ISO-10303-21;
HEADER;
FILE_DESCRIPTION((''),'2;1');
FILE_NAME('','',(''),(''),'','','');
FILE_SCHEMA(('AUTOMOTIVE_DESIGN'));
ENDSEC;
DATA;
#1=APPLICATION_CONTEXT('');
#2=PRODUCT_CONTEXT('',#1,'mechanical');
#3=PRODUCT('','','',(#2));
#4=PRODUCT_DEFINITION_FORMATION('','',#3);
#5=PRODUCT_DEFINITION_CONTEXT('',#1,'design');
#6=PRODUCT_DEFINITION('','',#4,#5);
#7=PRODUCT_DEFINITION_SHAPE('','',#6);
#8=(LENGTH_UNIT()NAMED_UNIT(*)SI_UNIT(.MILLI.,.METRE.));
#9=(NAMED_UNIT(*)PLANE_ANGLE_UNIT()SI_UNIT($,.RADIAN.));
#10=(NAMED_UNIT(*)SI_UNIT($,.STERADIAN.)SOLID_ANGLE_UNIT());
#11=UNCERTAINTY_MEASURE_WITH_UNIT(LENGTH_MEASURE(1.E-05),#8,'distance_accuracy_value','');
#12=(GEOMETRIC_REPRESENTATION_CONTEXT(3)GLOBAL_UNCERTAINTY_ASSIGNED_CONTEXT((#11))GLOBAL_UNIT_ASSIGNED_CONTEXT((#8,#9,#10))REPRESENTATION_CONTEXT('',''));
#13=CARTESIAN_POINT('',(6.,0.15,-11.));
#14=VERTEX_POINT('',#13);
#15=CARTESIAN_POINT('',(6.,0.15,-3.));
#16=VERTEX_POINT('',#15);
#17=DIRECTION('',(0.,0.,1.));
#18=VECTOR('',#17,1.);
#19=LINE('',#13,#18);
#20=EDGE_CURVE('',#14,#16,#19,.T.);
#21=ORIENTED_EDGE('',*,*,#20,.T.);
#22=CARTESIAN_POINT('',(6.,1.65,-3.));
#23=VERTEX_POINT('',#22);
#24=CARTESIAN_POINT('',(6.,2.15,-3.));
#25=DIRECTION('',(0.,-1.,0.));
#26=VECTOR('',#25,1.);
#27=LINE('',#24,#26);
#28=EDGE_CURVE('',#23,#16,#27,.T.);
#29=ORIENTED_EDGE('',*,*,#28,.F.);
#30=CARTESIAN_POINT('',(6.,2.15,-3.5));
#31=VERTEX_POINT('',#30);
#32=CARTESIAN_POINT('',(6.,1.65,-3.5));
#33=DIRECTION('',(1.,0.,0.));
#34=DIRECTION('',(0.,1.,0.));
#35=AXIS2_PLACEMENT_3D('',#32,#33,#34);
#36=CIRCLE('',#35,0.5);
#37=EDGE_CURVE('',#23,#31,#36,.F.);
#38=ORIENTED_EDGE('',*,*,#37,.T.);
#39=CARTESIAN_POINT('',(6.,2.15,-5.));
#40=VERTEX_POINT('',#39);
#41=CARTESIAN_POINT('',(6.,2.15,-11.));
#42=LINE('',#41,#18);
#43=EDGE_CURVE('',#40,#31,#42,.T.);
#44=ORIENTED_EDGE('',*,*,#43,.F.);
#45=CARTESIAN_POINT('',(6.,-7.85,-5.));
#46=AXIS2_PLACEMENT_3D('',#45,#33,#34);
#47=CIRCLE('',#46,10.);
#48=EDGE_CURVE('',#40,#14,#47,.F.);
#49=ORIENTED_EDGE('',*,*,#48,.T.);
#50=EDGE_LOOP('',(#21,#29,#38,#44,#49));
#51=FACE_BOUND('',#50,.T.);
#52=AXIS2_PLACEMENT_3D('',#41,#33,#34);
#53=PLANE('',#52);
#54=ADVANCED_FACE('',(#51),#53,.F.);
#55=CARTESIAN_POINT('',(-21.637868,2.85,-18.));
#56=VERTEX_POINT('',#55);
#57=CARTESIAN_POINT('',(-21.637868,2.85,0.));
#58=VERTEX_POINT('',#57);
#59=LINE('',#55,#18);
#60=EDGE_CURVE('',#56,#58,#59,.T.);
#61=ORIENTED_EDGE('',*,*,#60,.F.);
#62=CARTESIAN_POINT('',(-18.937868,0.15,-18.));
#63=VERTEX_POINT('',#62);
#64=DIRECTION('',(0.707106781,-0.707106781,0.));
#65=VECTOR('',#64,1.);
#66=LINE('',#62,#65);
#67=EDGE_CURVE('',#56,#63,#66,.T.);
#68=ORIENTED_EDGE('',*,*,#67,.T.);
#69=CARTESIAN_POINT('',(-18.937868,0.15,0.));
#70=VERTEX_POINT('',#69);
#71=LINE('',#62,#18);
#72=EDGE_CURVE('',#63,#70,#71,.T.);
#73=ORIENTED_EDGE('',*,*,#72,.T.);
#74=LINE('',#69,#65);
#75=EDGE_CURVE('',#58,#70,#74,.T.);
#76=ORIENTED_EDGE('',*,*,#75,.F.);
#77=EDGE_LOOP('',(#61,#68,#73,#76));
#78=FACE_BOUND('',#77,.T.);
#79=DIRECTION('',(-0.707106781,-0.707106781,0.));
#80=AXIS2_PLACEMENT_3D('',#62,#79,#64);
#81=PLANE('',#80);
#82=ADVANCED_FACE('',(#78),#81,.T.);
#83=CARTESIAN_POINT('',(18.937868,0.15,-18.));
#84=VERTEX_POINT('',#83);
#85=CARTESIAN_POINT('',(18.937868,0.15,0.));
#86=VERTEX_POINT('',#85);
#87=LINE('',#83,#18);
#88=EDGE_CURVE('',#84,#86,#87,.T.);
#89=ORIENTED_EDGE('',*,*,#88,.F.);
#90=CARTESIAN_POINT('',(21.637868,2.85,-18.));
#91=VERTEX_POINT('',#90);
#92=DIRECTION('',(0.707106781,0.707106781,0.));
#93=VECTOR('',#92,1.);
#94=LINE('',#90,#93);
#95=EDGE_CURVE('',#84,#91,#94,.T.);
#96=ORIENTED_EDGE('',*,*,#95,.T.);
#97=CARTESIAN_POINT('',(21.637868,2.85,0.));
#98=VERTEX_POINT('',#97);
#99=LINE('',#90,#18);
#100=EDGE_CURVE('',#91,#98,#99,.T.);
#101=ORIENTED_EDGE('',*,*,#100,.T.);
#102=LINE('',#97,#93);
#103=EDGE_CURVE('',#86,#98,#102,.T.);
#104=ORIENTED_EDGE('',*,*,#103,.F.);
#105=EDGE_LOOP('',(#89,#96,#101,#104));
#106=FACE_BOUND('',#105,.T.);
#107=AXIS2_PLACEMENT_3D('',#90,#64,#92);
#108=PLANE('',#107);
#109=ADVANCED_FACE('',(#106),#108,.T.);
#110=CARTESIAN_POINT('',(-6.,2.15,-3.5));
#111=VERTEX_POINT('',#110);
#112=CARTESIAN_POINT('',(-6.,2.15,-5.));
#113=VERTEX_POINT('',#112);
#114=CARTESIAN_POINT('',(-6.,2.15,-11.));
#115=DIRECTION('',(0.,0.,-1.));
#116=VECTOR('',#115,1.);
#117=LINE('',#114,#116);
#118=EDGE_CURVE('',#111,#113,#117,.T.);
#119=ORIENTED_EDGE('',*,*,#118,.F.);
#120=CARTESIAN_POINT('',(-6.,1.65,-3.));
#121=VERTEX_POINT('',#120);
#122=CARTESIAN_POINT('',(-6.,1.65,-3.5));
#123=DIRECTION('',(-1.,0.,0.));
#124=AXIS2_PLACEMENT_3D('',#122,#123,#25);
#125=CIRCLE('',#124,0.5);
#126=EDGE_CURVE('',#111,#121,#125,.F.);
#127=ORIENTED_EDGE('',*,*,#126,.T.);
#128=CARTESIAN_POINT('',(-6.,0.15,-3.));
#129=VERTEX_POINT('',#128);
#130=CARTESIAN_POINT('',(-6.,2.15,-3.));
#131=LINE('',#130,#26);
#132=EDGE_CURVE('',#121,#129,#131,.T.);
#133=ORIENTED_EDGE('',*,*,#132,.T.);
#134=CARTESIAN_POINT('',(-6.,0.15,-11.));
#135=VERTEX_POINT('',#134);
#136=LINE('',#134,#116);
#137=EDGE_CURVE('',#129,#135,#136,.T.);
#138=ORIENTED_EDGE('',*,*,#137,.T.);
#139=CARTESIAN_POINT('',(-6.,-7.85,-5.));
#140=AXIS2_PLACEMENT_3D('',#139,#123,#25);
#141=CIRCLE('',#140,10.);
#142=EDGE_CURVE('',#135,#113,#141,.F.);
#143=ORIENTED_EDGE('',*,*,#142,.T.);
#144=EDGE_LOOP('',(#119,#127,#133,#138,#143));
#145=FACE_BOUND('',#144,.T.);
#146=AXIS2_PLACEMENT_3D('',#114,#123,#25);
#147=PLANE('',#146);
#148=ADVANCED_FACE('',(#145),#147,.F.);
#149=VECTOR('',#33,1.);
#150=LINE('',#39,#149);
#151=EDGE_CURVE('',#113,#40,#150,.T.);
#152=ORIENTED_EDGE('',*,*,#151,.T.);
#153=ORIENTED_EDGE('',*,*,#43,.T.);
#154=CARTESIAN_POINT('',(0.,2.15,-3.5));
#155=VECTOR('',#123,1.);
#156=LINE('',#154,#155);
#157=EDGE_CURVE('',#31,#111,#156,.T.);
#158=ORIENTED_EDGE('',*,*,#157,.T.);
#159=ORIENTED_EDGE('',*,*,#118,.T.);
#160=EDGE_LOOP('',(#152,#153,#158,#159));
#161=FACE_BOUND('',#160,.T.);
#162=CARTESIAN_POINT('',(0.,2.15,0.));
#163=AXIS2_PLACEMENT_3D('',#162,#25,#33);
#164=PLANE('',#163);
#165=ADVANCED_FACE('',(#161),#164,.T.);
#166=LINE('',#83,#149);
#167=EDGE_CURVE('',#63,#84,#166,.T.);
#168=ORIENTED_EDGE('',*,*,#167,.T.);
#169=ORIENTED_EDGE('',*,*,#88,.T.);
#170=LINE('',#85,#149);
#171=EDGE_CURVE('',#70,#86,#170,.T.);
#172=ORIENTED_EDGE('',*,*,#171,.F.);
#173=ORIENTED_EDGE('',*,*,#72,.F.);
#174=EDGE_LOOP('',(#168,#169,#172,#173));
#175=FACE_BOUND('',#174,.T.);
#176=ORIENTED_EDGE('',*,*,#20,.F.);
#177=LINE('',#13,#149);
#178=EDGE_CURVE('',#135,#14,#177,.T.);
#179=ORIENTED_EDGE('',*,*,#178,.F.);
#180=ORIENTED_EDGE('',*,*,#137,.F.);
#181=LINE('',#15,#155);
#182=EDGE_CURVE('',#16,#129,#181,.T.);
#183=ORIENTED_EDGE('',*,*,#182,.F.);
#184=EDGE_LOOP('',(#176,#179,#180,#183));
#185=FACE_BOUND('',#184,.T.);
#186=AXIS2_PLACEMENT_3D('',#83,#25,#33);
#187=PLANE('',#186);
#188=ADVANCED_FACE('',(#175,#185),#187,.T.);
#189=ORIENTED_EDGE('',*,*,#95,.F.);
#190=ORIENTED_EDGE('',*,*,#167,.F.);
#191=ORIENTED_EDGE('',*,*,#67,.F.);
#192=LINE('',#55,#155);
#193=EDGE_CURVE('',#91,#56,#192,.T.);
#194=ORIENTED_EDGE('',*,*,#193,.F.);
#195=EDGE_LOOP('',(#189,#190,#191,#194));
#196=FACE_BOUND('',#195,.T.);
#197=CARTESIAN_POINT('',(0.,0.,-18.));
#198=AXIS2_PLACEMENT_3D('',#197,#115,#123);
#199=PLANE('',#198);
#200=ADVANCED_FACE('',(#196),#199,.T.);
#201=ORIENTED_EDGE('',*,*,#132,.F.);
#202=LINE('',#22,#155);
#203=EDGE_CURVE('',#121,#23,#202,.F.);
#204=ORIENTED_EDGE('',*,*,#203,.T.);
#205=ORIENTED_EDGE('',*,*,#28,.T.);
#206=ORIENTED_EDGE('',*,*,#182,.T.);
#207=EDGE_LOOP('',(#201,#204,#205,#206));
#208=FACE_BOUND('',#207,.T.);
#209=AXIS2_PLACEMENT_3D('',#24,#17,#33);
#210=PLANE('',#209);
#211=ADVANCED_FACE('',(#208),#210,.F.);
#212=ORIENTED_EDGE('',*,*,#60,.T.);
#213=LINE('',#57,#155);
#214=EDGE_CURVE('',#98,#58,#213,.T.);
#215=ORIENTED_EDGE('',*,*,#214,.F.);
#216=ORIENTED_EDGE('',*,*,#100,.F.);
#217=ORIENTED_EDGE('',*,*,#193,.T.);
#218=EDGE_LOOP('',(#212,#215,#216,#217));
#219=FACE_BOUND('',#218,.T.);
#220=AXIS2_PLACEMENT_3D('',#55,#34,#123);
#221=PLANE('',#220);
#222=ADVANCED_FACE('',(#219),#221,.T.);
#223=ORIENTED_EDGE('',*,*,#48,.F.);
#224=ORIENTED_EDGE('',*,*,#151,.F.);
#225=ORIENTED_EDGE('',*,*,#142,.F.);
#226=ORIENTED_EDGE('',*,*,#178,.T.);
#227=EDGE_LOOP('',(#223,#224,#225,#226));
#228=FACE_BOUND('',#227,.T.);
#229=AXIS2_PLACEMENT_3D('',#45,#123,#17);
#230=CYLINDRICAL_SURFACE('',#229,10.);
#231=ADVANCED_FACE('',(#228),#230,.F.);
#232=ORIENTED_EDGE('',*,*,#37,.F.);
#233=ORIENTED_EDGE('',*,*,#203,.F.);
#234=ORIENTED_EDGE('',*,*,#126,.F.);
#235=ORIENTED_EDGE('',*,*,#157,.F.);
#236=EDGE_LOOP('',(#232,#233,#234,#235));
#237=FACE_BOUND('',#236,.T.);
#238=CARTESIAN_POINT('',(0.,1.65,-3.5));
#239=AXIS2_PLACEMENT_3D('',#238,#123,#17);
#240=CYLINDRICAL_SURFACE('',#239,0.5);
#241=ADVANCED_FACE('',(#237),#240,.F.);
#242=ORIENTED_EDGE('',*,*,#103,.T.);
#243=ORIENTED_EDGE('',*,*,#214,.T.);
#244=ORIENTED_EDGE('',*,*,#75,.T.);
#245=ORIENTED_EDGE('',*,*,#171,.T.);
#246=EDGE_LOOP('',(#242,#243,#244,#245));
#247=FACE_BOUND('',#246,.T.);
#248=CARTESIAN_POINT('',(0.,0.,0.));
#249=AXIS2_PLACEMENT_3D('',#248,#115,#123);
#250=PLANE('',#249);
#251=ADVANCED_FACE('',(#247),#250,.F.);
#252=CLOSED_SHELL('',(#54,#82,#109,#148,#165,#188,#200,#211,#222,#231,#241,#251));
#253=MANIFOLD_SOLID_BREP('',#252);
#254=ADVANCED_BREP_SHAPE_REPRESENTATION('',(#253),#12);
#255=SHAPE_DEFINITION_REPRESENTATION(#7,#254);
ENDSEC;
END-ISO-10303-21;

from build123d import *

# Parameters (mm, degrees)
BOSS_EXTRUDE1_DEPTH = 18
SKETCH4_W           = 12
SKETCH4_H           = 8
CUT_EXTRUDE1_DEPTH  = 2
FILLET1_R           = 10
FILLET2_R           = 0.5


with BuildPart() as part:
    # Sketch2 → Boss-Extrude1 (new body)
    with BuildSketch(Plane.XY):
        Polygon((21.637867966, 2.85), (18.937867966, 0.15), (-18.937867966, 0.15), (-21.637867966, 2.85), align=None)
    extrude(amount=-BOSS_EXTRUDE1_DEPTH)

    # Sketch4 → Cut-Extrude1 (cut)
    with BuildSketch(Plane.XZ.offset(-0.15)):
        with Locations((0, -7)):
            Rectangle(SKETCH4_W, SKETCH4_H)
    extrude(amount=-CUT_EXTRUDE1_DEPTH, mode=Mode.SUBTRACT)

    # Fillet1
    # the kernel refuses this fillet: 10 mm, written as the material it adds along each edge
    with BuildSketch(Plane(origin=(6, 2.15, -11), x_dir=(0, -1, 0), z_dir=(-1, 0, 0))) as fillet1_piece_1:
        with BuildLine():
            CenterArc((10, 6), FILLET1_R, 180, 36.869897646)
            Line((0, 6), (0, 0))
            Line((0, 0), (2, 0))
        make_face()
    extrude(amount=12)

    # Fillet2
    fillet2_edges = [part.edges().sort_by_distance(p)[0] for p in [
        (0, 2.15, -3),
    ]]
    fillet(fillet2_edges, radius=FILLET2_R)


solid = part.part
